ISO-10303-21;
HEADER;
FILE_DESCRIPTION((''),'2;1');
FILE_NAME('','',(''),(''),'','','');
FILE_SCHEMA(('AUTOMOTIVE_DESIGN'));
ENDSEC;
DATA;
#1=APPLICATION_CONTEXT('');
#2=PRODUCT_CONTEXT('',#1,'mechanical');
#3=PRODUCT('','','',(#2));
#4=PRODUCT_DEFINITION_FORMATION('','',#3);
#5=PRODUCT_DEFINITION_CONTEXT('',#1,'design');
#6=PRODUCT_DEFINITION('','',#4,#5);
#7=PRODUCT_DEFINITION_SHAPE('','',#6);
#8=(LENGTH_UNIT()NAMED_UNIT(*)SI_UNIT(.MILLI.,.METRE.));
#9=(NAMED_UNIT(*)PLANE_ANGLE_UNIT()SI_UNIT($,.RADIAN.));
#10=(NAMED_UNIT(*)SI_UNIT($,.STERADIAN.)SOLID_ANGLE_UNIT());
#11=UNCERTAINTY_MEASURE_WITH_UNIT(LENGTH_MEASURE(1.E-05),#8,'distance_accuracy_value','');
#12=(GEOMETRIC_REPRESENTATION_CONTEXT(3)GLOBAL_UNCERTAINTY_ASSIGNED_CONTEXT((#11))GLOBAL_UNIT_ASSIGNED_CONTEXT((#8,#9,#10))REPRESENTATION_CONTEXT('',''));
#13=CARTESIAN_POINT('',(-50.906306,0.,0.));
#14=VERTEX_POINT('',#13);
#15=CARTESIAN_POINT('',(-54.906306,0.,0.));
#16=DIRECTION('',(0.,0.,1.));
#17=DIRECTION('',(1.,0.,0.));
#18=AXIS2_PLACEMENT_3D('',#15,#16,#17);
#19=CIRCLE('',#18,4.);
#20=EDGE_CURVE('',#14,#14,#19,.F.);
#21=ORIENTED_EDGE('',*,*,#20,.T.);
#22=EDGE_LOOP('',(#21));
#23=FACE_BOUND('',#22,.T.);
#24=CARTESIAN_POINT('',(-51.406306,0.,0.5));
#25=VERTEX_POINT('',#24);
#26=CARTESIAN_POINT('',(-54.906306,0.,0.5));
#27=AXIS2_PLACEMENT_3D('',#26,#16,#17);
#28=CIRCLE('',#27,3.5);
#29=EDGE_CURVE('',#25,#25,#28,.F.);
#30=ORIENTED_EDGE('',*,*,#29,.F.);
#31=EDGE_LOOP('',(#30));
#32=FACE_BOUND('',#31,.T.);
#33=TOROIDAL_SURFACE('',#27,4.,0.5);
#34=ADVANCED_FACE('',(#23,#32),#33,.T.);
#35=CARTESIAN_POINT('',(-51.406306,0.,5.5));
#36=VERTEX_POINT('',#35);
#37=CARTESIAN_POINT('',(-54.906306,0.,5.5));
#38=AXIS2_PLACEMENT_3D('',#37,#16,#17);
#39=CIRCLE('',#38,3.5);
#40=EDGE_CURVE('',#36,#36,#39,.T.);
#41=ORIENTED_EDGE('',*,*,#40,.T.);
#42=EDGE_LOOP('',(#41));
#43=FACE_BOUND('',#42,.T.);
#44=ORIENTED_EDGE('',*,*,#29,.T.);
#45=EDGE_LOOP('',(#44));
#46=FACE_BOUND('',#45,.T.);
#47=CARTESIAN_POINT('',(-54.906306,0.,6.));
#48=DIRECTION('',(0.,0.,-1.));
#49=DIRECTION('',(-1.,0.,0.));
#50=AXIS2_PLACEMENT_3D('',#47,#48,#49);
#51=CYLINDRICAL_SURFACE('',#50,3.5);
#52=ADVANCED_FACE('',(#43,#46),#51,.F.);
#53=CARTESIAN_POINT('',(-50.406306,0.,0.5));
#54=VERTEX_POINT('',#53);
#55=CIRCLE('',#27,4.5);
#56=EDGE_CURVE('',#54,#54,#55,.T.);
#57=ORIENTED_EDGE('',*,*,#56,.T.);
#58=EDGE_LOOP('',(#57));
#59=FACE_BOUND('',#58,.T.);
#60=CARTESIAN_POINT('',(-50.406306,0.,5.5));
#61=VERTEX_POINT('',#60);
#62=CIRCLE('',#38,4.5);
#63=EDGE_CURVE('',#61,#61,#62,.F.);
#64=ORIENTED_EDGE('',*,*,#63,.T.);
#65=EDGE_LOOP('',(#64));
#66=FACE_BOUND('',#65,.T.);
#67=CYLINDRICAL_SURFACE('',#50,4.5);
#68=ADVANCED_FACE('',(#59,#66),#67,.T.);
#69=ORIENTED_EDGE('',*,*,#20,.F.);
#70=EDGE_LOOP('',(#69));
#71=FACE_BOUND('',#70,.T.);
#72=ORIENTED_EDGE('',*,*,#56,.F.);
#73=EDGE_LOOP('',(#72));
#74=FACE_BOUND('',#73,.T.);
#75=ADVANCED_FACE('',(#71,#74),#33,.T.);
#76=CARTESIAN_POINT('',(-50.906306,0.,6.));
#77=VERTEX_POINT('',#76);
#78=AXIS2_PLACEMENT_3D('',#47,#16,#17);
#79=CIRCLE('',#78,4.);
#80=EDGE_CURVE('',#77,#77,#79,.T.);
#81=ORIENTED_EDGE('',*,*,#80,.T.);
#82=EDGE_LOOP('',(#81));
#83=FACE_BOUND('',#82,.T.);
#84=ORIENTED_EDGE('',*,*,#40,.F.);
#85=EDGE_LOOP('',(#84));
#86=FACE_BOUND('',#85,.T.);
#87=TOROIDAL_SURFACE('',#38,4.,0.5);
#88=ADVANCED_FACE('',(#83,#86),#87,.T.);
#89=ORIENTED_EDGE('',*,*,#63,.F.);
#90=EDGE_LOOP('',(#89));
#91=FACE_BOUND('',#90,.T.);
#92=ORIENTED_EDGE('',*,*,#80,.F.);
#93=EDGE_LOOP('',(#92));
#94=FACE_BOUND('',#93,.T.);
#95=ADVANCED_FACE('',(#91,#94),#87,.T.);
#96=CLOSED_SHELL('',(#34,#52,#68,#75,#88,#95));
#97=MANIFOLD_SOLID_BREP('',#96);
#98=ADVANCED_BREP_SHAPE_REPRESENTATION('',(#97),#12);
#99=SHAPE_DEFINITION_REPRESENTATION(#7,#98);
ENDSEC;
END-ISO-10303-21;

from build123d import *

# Parameters (mm, degrees)
SKETCH1_R           = 4.5
SKETCH1_R_2         = 3.5
BOSS_EXTRUDE1_DEPTH = 6
FILLET1_R           = 0.5


with BuildPart() as part:
    # Sketch1 → Boss-Extrude1 (new body)
    with BuildSketch(Plane.XY):
        with Locations((-54.906305706, 0)):
            Circle(SKETCH1_R)
        with Locations((-54.906305706, 0)):
            Circle(SKETCH1_R_2, mode=Mode.SUBTRACT)
    extrude(amount=BOSS_EXTRUDE1_DEPTH)

    # Fillet1
    fillet1_edges = [part.edges().sort_by_distance(p)[0] for p in [
        (-59.406305706, 0, 0),
        (-59.406305706, 0, 6),
        (-58.406305706, 0, 0),
        (-58.406305706, 0, 6),
    ]]
    fillet(fillet1_edges, radius=FILLET1_R - 0.0001)  # a hair under: the kernel refuses the full size


solid = part.part
